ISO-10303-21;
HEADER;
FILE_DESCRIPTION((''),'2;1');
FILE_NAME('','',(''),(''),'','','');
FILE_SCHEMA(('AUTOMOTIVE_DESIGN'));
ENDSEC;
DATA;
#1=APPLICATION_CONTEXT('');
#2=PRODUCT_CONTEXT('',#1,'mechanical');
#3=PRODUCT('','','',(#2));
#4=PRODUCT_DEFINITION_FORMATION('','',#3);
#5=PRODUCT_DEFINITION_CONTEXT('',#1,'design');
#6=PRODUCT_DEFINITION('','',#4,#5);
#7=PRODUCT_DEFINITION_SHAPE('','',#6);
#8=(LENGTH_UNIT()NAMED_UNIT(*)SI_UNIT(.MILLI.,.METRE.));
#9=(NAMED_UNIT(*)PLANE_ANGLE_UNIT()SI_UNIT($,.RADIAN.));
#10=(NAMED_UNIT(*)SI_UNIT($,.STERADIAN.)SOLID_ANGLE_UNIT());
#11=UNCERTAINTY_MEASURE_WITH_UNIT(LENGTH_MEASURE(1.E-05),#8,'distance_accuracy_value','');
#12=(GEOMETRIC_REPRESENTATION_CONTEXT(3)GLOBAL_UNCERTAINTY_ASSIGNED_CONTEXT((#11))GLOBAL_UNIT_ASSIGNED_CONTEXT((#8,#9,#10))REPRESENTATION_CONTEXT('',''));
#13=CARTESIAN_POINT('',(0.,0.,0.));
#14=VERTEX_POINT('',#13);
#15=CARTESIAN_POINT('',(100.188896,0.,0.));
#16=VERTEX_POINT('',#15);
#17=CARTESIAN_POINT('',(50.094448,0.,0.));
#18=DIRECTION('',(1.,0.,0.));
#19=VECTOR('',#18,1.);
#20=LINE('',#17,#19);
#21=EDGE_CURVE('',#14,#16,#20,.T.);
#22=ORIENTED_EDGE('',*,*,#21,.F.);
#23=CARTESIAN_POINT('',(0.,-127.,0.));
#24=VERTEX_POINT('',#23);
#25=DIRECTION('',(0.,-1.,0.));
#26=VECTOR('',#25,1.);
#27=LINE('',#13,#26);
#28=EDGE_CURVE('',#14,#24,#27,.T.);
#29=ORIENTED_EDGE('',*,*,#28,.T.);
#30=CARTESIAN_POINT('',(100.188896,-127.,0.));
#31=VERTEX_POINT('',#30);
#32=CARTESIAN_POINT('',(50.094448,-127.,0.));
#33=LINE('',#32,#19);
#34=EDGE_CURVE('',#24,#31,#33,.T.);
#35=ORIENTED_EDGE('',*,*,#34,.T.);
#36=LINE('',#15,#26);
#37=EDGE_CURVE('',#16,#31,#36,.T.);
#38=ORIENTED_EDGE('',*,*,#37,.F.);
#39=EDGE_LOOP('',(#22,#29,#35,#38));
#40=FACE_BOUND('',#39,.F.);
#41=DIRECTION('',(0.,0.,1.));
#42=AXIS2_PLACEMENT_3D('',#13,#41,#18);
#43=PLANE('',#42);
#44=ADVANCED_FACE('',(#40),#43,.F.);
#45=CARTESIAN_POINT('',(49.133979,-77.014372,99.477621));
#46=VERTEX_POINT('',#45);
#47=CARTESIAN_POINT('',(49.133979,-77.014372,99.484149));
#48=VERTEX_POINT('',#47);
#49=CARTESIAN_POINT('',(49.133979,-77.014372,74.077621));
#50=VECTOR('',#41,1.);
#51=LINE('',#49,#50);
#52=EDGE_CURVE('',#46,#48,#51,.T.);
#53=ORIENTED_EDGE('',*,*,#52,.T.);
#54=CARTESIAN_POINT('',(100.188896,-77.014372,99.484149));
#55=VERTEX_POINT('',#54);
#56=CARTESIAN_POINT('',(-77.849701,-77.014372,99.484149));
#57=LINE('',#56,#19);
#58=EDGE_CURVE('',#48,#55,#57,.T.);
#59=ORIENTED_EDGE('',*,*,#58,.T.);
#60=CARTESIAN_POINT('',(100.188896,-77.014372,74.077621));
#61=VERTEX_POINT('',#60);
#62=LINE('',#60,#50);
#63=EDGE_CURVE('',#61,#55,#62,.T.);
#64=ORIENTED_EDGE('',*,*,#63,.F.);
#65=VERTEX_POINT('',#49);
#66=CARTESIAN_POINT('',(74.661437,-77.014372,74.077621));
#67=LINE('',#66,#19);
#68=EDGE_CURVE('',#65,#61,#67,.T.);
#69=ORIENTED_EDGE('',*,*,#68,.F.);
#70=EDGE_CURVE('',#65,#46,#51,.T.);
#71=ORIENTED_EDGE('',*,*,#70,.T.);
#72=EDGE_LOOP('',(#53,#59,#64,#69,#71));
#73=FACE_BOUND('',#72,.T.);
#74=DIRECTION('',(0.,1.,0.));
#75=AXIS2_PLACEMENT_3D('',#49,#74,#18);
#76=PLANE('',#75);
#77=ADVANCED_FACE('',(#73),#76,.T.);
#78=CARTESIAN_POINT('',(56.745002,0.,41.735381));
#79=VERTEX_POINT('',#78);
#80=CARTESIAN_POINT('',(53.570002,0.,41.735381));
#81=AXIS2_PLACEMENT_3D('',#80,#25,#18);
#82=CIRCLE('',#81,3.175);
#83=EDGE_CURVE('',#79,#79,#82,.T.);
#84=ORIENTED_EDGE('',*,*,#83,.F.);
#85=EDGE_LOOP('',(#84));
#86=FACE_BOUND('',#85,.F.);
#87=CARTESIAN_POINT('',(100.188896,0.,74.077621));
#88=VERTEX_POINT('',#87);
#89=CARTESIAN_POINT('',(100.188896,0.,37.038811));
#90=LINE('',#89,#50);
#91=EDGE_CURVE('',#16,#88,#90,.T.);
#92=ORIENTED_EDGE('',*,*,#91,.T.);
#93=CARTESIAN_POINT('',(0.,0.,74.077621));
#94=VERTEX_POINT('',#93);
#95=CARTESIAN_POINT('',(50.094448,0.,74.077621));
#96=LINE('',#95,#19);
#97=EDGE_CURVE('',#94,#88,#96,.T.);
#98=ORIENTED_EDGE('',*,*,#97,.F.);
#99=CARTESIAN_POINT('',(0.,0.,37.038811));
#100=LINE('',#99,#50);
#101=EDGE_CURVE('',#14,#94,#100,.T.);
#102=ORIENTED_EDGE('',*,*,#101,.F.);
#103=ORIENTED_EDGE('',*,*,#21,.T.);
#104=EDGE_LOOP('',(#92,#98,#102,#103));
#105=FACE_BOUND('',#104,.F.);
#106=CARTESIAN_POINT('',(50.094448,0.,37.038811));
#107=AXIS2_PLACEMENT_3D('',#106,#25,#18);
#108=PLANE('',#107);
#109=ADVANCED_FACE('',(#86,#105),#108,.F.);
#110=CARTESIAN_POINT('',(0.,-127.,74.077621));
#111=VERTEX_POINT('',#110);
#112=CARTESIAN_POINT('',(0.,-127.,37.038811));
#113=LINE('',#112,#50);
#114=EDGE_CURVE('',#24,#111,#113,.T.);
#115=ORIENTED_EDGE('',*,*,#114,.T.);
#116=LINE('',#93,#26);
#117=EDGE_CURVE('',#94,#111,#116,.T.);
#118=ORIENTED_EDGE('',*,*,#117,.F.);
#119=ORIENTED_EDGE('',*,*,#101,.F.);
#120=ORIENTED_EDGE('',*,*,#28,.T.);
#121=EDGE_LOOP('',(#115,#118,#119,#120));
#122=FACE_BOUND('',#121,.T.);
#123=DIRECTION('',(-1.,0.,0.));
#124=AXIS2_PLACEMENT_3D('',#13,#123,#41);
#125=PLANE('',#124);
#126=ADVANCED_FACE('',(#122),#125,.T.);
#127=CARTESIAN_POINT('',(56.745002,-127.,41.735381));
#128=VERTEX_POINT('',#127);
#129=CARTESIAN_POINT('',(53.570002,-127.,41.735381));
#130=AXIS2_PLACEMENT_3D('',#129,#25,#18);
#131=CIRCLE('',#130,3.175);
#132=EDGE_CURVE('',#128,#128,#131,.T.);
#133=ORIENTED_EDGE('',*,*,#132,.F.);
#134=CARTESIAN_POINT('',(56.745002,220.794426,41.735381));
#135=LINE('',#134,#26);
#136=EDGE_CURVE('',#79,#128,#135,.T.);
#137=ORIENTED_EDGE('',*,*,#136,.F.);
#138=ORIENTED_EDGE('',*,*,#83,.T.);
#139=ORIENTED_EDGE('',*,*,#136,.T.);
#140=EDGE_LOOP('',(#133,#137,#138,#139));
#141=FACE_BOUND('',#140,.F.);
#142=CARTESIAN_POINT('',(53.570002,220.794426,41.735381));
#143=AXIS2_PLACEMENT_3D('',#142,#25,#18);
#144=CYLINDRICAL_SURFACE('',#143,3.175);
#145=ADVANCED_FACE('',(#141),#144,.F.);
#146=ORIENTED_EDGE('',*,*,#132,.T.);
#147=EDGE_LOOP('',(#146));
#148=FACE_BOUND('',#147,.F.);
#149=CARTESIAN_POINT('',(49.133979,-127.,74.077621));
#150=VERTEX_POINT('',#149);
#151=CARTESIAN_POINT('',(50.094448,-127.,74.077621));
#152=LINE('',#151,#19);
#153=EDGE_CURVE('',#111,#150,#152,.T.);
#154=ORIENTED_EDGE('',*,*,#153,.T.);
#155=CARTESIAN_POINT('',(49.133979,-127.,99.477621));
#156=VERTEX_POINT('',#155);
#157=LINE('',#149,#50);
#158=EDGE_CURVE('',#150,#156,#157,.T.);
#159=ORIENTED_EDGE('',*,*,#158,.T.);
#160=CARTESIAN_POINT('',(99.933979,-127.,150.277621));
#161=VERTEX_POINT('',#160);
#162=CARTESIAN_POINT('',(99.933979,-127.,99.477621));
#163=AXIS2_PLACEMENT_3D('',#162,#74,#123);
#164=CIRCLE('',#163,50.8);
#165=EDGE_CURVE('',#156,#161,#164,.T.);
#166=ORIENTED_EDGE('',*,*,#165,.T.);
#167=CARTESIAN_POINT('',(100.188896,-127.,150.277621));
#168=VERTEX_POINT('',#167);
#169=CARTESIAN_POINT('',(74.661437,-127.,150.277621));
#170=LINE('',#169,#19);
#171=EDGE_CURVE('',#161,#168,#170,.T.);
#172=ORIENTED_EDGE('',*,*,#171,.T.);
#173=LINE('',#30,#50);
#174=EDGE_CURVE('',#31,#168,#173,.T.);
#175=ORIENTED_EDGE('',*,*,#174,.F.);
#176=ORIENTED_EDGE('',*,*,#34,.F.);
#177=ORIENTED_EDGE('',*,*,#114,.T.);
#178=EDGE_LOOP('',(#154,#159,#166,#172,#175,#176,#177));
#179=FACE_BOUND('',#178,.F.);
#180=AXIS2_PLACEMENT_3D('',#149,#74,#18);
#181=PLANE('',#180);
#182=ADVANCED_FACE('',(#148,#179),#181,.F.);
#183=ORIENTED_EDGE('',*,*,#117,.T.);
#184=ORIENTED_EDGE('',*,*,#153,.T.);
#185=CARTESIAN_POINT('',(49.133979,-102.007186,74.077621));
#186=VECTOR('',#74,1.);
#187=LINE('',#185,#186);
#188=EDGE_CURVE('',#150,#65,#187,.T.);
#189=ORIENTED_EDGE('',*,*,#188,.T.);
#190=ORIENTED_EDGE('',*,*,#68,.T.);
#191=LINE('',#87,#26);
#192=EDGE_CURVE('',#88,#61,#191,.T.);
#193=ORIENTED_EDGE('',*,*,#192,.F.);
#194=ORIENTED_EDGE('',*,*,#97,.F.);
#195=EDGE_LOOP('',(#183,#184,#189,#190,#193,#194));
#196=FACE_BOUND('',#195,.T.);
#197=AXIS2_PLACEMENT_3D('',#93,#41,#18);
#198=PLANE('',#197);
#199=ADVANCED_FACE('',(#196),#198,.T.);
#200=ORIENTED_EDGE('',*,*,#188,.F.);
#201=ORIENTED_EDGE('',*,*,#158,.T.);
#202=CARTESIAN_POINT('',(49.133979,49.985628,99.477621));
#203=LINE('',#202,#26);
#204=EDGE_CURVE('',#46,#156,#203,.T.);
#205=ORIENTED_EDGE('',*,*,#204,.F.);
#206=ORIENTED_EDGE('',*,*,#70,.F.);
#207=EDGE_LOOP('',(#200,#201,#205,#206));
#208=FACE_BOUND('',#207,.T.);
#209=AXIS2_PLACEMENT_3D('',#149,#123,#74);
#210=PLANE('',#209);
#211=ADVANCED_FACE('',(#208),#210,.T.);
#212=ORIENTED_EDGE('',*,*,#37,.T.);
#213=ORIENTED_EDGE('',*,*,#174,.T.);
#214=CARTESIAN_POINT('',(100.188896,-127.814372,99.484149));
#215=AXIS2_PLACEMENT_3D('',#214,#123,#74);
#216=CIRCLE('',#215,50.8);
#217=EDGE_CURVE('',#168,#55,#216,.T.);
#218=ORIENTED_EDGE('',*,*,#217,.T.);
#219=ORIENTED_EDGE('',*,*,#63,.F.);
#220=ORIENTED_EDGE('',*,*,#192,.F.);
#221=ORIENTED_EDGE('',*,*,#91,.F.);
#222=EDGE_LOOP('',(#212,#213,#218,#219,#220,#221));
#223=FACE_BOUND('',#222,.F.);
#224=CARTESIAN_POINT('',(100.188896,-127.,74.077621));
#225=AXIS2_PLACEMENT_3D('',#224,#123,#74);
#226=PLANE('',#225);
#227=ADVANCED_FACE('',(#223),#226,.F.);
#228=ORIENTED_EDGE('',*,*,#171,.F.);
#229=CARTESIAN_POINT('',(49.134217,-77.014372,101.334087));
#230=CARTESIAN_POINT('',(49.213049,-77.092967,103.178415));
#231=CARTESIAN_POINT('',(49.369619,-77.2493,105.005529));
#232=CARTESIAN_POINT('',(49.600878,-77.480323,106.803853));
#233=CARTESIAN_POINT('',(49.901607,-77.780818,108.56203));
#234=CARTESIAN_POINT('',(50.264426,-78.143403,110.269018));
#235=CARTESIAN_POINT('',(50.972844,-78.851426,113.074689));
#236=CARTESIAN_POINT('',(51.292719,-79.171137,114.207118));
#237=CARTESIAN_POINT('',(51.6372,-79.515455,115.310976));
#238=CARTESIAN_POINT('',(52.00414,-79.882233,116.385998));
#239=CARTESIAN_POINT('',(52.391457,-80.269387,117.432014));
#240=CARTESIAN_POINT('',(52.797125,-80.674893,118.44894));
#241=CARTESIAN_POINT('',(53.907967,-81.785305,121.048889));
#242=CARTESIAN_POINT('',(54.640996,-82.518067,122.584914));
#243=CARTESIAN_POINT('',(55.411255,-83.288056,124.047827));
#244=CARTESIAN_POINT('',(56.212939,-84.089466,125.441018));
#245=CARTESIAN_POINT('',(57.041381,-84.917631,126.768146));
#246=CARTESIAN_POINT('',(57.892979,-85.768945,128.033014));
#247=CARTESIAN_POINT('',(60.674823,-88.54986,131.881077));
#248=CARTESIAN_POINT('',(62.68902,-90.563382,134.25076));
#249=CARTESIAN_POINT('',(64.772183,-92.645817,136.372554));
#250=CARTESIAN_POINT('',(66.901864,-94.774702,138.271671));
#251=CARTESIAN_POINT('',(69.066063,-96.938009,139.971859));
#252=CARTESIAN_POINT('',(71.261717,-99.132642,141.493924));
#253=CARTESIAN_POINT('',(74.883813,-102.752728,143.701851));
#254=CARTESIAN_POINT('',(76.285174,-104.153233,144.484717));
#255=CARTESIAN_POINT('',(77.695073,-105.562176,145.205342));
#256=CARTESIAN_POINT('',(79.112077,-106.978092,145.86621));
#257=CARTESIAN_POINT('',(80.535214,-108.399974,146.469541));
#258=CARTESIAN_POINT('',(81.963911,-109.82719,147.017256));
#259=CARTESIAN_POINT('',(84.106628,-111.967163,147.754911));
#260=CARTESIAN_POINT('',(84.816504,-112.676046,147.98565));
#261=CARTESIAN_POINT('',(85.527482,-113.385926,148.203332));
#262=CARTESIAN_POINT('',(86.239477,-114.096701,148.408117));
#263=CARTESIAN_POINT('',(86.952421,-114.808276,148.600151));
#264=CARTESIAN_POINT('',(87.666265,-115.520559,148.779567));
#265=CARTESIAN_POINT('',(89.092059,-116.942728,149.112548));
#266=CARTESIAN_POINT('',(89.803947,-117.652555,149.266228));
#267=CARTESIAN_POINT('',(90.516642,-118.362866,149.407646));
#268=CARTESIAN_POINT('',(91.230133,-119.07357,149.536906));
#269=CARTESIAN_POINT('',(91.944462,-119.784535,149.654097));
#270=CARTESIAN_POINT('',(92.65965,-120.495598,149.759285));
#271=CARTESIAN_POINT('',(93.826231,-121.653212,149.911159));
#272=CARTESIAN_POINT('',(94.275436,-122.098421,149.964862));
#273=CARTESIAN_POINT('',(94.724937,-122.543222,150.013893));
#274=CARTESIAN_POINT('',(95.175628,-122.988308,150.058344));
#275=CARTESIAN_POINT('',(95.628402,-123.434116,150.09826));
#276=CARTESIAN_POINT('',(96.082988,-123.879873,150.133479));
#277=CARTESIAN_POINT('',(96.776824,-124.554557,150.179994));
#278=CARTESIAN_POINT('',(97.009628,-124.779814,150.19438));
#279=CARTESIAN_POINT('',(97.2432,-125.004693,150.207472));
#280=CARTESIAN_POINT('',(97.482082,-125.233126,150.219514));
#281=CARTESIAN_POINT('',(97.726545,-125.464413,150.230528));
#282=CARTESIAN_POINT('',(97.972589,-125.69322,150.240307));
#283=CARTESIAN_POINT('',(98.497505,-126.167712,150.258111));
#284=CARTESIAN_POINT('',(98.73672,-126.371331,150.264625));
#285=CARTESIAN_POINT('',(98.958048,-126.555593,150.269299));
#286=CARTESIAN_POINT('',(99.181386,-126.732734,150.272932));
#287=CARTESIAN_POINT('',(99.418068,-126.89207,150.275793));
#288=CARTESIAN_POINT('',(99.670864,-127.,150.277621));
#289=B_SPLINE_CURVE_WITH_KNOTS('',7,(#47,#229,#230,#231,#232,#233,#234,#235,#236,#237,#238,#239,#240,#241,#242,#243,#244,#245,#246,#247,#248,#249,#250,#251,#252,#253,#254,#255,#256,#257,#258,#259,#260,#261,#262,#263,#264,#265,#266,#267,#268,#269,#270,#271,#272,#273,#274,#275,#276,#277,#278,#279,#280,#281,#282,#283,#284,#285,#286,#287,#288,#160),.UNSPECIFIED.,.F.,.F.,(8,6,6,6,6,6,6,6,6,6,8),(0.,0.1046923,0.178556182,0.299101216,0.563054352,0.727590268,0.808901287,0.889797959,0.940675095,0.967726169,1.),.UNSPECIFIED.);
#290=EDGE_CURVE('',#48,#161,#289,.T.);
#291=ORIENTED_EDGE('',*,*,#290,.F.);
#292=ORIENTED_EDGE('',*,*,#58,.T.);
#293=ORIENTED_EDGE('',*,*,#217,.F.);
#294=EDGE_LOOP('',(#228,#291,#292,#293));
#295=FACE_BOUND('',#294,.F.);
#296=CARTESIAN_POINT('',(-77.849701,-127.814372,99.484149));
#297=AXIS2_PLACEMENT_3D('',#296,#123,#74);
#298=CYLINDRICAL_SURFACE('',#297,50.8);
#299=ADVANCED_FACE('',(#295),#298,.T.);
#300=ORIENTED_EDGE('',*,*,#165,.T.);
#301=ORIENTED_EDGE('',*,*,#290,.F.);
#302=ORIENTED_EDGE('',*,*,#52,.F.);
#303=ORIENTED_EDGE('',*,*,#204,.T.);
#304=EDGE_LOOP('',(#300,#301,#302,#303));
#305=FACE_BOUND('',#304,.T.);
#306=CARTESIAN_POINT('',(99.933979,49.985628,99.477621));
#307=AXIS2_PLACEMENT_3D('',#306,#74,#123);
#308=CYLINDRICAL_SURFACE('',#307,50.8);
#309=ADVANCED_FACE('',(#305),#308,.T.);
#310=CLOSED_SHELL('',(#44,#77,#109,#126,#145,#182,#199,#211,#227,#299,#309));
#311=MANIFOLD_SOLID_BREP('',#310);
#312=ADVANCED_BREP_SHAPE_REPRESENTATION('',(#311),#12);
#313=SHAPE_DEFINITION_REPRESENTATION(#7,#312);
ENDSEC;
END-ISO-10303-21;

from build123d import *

# Parameters (mm, degrees)
F0_W        = 100.18889606
F0_H        = 74.0776211023
F1_DEPTH    = 127
F2_W        = 51.0549172759
F2_H        = 49.9856282473
F3_DEPTH    = 76.2
F4_T1_DEPTH = 305.0222773169
F4_T3_DEPTH = 303.9856282473
F6_D        = 6.35


# Not quite as in the source:
# - a fillet or chamfer that OpenCascade refuses, or shapes differently, is made with other operations: its cross-section is extruded or revolved along the edge and cut away or added


with BuildPart() as f1:
    # F0 (on Front) → F1 (new body)
    with BuildSketch(Plane.XZ):
        with Locations((50.09444803, 37.0388105512)):
            Rectangle(F0_W, F0_H)
    extrude(amount=F1_DEPTH)

    # F2 (on face) → F3 (join)
    with BuildSketch(Plane.XY.offset(74.0776211023)):
        with Locations((74.661437422, -102.0071858764)):
            Rectangle(F2_W, F2_H)
    extrude(amount=F3_DEPTH)

    # F4: fillet of radius 50.8 on 2 edges, made by hand

    # F4_s2 → F4_t1 (cut)
    with BuildSketch(Plane.YZ.offset(-77.8497012364)):
        with BuildLine():
            ThreePointArc((-77.0143717527, 99.4841490941), (-91.6065681392, 135.1160864184), (-127, 150.2776211023))
            Line((-127, 150.2776211023), (-77.0143717527, 150.2776211023))
            Line((-77.0143717527, 150.2776211023), (-77.0143717527, 99.4841490941))
        make_face()
    extrude(amount=F4_T1_DEPTH, mode=Mode.SUBTRACT)

    # F4_s4 → F4_t3 (cut)
    with BuildSketch(Plane.XZ.offset(-49.9856282473)):
        with BuildLine():
            ThreePointArc((49.1339787841, 99.4776211023), (64.0129542998, 135.3986455866), (99.9339787841, 150.2776211023))
            Line((99.9339787841, 150.2776211023), (49.1339787841, 150.2776211023))
            Line((49.1339787841, 150.2776211023), (49.1339787841, 99.4776211023))
        make_face()
    extrude(amount=F4_T3_DEPTH, mode=Mode.SUBTRACT)

    # F6 (through all)
    with Locations(Plane(origin=(0, 0, 0), x_dir=(-1, 0, 0), z_dir=(0, 1, 0))):
        with Locations((-53.5700023174, 41.735380888)):
            Hole(F6_D / 2)


solid = f1.part
